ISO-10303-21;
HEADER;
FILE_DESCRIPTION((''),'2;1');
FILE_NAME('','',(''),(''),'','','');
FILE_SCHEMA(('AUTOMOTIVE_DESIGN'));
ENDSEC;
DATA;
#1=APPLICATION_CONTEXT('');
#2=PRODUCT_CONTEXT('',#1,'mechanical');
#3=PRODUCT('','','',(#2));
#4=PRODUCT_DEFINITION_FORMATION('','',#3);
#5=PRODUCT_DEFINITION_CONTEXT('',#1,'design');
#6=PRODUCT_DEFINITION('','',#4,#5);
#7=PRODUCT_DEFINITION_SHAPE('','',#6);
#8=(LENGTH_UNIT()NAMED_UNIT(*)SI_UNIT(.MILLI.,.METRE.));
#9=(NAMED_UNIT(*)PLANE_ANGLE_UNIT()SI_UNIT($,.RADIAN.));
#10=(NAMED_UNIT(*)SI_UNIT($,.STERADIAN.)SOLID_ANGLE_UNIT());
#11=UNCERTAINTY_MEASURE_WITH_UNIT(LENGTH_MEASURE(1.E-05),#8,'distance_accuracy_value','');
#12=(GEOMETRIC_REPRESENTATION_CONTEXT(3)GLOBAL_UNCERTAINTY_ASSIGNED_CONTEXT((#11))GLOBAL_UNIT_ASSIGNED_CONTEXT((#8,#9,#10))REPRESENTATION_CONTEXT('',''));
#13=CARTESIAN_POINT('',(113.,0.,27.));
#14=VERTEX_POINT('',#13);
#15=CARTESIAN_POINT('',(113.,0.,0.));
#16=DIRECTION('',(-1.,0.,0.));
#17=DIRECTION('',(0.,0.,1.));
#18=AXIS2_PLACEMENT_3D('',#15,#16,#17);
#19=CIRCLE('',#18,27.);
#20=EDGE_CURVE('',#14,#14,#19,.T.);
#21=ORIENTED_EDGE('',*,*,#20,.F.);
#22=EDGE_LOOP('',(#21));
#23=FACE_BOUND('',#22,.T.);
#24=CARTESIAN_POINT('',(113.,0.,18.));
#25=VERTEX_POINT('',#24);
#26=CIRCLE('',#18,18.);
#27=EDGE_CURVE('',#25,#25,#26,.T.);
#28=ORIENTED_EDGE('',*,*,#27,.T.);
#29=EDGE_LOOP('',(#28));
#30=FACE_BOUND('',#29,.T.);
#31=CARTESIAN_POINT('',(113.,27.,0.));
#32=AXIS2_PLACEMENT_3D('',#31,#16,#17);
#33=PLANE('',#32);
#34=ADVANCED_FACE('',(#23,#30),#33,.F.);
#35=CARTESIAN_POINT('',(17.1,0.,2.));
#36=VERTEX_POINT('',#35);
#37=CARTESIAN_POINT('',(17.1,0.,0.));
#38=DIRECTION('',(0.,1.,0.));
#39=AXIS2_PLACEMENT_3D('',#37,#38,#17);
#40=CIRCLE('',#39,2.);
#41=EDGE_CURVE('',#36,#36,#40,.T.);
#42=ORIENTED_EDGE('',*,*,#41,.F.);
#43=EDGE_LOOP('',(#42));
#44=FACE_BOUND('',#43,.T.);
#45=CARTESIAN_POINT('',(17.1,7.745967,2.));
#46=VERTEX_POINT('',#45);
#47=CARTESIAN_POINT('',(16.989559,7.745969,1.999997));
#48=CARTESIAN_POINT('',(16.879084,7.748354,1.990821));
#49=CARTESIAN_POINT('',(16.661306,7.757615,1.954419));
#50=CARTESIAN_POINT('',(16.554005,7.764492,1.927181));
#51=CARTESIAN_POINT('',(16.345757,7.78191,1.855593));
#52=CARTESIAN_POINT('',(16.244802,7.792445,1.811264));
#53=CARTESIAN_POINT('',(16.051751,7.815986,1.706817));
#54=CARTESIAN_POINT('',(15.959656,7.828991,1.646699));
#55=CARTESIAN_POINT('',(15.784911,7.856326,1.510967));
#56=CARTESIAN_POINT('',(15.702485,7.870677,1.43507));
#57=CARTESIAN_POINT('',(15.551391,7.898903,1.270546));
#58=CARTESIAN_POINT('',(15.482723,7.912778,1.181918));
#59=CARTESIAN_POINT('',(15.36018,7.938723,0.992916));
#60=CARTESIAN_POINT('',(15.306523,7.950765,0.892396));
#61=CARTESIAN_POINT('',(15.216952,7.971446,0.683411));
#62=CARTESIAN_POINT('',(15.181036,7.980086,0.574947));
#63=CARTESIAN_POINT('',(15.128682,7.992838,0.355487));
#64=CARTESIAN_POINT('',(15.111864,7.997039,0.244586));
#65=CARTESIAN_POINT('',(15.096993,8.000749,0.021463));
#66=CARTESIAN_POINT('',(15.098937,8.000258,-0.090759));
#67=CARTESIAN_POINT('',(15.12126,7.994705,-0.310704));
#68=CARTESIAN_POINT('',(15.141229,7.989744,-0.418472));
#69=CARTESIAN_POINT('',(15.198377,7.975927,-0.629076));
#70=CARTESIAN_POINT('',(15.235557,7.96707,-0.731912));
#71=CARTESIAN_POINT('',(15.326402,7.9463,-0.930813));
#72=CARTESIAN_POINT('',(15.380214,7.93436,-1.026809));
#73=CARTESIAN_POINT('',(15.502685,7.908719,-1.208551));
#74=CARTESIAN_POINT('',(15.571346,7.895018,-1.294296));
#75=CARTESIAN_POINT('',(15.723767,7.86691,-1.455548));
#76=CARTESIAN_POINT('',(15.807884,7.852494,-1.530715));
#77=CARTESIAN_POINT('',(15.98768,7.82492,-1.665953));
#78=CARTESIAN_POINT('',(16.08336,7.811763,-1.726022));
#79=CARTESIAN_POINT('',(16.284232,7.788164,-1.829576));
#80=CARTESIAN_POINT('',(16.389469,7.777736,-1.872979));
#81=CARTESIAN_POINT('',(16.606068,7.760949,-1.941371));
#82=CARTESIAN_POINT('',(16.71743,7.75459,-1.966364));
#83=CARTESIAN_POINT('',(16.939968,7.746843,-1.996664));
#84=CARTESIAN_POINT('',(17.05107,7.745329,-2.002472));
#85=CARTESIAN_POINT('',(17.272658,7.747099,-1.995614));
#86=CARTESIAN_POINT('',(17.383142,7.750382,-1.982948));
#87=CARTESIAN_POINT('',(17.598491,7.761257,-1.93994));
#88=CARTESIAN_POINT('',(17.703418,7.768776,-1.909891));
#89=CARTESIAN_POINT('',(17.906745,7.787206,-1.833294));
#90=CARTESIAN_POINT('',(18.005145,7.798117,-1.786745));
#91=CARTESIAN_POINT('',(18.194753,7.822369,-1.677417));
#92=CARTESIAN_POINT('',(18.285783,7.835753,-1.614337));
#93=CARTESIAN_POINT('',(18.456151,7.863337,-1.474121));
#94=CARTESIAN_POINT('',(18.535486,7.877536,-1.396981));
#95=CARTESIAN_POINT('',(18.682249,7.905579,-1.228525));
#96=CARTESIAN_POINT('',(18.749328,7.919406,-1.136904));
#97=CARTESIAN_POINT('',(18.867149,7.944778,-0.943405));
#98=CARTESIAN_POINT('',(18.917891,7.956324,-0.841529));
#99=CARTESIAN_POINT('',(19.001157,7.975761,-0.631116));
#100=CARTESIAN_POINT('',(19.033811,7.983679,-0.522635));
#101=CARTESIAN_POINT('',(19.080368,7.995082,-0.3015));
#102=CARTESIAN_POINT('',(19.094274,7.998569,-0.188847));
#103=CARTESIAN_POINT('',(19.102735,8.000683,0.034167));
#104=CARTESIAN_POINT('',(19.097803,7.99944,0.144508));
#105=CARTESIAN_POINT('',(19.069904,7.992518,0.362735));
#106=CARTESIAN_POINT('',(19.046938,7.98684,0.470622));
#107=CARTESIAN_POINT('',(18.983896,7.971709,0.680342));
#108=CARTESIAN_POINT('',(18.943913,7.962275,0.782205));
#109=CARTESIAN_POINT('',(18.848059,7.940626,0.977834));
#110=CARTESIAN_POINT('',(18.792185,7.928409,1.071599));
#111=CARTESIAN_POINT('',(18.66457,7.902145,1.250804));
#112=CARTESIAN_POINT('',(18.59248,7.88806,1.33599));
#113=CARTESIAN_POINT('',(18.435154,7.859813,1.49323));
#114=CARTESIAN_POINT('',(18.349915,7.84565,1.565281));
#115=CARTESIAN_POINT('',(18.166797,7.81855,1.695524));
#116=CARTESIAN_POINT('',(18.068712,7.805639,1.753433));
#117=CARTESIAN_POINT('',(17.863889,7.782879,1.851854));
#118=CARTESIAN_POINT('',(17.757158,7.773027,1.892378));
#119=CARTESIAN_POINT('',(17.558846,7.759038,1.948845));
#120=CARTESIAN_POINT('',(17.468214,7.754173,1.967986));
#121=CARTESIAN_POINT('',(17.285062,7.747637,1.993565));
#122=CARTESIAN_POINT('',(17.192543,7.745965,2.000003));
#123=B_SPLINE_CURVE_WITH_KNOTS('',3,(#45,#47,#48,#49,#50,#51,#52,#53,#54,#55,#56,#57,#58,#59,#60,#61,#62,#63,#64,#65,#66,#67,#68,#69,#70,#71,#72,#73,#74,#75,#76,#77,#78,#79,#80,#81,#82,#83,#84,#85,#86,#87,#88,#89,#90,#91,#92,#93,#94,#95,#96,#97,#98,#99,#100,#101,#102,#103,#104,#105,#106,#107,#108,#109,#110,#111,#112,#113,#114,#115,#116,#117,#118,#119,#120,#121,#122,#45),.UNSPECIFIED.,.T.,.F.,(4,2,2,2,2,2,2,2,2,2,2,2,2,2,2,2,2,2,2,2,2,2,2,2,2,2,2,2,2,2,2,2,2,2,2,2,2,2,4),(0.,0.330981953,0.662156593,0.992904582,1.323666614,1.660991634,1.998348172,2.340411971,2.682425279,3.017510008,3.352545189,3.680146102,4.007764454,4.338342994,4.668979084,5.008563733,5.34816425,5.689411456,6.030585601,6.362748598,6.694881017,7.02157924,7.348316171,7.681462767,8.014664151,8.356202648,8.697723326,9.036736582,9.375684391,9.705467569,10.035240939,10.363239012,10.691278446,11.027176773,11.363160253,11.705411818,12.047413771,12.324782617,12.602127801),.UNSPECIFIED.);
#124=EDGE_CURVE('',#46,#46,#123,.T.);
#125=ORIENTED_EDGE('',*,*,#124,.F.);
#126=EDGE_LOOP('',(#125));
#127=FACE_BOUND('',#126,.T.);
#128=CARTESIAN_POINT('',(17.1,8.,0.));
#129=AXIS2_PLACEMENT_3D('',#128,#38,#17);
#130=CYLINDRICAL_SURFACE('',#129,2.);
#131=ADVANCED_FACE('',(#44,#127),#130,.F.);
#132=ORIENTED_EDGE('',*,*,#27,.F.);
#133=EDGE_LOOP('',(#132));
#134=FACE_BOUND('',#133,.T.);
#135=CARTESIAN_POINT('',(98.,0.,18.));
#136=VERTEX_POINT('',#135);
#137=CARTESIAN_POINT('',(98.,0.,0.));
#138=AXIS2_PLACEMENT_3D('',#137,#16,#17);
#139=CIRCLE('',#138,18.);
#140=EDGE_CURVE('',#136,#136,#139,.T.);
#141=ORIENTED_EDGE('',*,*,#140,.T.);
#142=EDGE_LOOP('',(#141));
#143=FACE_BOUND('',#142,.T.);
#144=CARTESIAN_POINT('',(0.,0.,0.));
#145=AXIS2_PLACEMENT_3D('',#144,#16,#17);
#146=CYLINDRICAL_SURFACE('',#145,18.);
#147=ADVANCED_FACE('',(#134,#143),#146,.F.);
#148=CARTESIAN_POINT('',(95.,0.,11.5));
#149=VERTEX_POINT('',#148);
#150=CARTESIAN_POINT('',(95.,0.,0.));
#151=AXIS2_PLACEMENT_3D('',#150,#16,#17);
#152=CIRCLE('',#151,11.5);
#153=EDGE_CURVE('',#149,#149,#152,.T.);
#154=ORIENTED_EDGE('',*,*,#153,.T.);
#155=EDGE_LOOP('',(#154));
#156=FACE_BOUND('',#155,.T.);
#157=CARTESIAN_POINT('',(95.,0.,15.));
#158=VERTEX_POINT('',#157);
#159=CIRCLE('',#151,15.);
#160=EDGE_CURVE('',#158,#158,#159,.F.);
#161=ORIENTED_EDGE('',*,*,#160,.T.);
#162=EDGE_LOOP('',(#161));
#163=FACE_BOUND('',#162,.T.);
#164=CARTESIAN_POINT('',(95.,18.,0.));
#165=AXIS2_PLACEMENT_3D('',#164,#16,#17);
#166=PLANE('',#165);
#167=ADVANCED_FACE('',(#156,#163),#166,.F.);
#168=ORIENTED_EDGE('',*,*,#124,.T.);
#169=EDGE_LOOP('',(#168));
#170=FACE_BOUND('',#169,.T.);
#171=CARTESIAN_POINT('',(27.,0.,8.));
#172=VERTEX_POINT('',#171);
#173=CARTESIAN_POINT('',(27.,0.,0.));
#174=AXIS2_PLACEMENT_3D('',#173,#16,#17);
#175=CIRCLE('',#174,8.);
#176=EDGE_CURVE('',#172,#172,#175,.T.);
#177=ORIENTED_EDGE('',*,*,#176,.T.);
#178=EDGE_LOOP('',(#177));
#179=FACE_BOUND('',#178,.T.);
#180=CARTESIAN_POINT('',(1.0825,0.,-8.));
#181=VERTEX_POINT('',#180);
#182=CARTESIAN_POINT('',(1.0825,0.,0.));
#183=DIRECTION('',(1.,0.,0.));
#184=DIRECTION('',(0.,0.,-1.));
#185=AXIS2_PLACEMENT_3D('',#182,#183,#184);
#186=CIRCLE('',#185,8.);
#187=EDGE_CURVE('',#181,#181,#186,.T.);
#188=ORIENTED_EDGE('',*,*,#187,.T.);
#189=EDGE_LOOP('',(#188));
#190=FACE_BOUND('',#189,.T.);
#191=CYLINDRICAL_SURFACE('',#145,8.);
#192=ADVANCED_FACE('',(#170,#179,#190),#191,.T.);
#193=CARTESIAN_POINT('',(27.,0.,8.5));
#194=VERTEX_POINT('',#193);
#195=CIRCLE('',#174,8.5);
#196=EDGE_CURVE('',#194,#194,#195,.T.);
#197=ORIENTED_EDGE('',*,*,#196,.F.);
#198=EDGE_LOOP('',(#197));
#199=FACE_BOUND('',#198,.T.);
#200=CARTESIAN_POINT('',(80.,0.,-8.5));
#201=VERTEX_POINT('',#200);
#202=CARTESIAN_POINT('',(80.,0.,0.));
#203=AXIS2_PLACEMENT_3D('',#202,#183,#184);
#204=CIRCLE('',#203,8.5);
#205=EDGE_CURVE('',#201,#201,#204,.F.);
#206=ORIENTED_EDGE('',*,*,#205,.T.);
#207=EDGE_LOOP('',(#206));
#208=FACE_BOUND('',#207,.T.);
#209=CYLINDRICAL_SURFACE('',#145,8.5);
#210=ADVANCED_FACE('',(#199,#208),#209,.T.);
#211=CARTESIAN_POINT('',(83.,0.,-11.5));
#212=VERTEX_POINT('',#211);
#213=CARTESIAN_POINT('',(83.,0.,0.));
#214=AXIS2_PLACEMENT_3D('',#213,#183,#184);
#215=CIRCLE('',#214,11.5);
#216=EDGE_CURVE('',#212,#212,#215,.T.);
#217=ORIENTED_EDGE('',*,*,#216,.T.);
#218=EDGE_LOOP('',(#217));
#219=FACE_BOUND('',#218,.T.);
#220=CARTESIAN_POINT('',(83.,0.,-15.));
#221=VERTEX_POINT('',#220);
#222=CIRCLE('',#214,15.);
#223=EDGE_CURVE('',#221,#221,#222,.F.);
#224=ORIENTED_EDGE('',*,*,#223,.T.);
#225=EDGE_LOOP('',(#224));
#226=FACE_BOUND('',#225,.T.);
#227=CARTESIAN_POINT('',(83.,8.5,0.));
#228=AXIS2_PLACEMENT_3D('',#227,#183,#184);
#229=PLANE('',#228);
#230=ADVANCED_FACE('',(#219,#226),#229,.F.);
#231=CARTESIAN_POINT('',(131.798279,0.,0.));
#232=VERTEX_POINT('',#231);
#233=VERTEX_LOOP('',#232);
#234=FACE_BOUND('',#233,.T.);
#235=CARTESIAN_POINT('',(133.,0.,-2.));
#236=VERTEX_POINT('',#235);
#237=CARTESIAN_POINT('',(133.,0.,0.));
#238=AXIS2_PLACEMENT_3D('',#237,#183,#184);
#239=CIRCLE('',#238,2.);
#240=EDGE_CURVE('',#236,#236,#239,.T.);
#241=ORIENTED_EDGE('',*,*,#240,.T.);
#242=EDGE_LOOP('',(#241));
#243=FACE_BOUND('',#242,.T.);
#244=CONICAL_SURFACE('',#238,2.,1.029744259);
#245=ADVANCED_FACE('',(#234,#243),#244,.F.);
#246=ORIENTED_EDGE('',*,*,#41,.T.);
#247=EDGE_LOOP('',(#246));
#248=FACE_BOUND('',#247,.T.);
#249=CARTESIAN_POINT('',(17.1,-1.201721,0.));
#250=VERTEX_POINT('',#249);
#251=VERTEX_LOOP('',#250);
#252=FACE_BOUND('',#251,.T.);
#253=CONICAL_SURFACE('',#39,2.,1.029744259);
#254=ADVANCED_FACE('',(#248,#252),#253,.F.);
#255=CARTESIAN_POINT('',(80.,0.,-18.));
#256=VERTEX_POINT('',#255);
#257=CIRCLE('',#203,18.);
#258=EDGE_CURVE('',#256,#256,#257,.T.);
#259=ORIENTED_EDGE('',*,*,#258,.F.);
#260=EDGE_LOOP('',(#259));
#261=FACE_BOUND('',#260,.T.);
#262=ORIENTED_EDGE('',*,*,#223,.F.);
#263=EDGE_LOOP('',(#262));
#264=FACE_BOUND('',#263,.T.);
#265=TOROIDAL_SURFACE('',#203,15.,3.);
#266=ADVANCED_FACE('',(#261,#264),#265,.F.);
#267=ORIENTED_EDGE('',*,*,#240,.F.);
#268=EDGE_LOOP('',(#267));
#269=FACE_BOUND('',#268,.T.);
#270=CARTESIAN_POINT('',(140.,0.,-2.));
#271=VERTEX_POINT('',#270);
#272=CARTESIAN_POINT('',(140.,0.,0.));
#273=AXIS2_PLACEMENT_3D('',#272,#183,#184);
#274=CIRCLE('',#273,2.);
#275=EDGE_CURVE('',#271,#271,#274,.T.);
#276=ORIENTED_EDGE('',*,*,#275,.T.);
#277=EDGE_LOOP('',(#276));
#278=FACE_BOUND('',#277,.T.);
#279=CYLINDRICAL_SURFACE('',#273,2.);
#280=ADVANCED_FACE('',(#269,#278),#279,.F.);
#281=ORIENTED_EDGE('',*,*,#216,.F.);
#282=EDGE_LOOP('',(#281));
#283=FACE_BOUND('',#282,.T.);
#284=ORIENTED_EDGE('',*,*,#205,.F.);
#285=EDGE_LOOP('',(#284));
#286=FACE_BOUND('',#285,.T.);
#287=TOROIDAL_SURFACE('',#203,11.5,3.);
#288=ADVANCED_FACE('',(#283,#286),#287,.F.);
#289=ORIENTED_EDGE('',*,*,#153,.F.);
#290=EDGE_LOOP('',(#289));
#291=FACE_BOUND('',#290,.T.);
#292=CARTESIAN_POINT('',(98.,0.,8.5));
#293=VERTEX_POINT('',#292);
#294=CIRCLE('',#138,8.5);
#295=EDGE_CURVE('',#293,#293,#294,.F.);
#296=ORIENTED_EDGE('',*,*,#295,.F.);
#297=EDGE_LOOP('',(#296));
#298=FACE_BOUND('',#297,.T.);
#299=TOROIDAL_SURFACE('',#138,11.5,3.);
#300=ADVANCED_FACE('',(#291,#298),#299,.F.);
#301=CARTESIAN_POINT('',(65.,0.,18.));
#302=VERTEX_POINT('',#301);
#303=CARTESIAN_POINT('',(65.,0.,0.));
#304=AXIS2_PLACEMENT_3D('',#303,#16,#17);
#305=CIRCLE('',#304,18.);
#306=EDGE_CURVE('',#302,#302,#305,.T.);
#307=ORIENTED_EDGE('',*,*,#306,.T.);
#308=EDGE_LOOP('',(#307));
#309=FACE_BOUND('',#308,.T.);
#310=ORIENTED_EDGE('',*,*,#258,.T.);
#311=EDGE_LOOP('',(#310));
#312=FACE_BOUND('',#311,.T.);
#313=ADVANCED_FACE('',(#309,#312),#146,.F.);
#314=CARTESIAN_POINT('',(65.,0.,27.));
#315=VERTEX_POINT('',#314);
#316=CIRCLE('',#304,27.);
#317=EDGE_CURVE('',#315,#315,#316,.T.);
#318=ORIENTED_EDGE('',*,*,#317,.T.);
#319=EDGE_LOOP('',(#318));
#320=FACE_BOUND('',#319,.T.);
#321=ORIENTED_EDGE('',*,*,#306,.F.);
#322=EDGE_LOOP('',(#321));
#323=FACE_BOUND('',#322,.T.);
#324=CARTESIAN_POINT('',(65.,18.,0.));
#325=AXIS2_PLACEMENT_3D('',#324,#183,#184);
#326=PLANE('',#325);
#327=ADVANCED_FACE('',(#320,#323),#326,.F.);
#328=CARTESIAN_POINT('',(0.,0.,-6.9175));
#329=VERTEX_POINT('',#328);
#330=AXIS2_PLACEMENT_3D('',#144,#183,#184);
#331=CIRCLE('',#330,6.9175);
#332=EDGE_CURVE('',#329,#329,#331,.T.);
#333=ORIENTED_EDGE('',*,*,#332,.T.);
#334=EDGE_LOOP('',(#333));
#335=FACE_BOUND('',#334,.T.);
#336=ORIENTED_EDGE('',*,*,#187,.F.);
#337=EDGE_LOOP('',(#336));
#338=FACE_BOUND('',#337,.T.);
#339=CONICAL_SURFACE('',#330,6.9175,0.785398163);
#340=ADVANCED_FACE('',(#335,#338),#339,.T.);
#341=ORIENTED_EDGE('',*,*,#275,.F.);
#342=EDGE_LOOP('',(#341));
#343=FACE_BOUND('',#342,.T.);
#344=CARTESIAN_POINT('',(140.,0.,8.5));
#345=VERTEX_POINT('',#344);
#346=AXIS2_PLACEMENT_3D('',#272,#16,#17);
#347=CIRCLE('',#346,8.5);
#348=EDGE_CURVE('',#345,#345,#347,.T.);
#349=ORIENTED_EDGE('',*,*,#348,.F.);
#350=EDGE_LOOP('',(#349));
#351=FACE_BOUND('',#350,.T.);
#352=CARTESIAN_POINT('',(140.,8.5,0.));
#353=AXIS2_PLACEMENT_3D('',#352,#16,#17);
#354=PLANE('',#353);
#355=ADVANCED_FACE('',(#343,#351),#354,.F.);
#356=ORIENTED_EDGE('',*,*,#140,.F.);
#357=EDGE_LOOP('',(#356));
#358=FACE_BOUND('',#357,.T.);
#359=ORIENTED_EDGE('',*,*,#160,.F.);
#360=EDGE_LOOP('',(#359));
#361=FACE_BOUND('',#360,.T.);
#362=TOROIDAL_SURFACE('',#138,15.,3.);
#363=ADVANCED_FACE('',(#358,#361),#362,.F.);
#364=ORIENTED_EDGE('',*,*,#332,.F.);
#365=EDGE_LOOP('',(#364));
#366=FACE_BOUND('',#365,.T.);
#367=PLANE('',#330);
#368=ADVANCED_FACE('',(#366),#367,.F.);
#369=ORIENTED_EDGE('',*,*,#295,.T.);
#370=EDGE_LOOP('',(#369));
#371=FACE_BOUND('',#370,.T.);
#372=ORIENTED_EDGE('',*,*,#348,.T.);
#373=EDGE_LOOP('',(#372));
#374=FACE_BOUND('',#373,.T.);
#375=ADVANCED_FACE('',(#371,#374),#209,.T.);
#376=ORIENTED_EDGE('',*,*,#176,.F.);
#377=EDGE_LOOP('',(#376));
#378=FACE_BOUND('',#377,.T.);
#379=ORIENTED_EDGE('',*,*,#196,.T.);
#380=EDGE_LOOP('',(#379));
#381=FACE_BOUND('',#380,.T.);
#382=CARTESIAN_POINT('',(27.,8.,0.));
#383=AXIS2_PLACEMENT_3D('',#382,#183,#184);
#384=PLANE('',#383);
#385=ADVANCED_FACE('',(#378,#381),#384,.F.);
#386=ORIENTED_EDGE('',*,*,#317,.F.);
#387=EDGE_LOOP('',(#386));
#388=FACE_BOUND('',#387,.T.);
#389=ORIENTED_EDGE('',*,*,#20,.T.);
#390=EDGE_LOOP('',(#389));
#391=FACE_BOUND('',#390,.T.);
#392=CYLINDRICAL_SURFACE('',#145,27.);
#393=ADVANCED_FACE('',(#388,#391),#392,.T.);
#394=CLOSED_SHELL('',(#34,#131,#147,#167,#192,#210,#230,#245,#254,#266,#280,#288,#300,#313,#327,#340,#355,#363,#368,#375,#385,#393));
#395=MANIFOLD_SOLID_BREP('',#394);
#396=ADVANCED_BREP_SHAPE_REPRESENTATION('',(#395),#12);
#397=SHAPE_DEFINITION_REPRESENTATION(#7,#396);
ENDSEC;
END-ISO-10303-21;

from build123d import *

# Parameters (mm, degrees)
FILLET_4_R      = 3
F_4_0MM_4_D     = 4
F_4_0MM_4_DEPTH = 8
F_4_0MM_4_TIP   = 1.201721238
F_4_0MM_5_D     = 4
F_4_0MM_5_DEPTH = 7
F_4_0MM_5_TIP   = 1.201721238


# Read off the part's stored shape, not the designer's step: M16 机械螺纹 螺柱1
with BuildPart() as part:
    # 草图1 → 旋转1 (revolve)
    with BuildSketch(Plane.XY, mode=Mode.PRIVATE) as revolve_1_sk:
        Polygon((0, 0), (0, 8), (27, 8), (27, 8.5), (83, 8.5), (83, 18), (65, 18), (65, 27), (113, 27), (113, 18), (95, 18), (95, 8.5), (140, 8.5), (140, 0), align=None)
    revolve(revolve_1_sk.sketch.rotate(Axis((0, 0, 0), (1, 0, 0)), 90), axis=Axis((0, 0, 0), (1, 0, 0)))

    # 圆角4
    fillet_4_edges = [part.edges().sort_by_distance(p)[0] for p in [
        (95, 0, -8.5),
        (95, 0, -18),
        (83, 0, -18),
        (83, 0, -8.5),
    ]]
    fillet(fillet_4_edges, radius=FILLET_4_R)

    # M16 机械螺纹 螺柱1 outline → M16 机械螺纹 螺柱1 (revolve, cut)
    with BuildSketch(Plane.YX):
        Polygon((8, 1.0825), (6.9175, 0), (8, 0), align=None)
    revolve(axis=Axis((0, 0, 0), (1, 0, 0)), mode=Mode.SUBTRACT)

    # Ø4.0mm 暗销孔4
    with Locations(Plane(origin=(17.1, 8, 0), x_dir=(0, 0, 1), z_dir=(0, 1, 0))):
        with Locations((0, 0)):
            Hole(F_4_0MM_4_D / 2, depth=F_4_0MM_4_DEPTH)
            with Locations((0, 0, -(F_4_0MM_4_DEPTH + F_4_0MM_4_TIP / 2))):  # 118° drill point
                Cone(0, F_4_0MM_4_D / 2, F_4_0MM_4_TIP, mode=Mode.SUBTRACT)

    # Ø4.0mm 暗销孔5
    with Locations(Plane(origin=(140, 0, 0), x_dir=(0, 0, -1), z_dir=(1, 0, 0))):
        with Locations((0, 0)):
            Hole(F_4_0MM_5_D / 2, depth=F_4_0MM_5_DEPTH)
            with Locations((0, 0, -(F_4_0MM_5_DEPTH + F_4_0MM_5_TIP / 2))):  # 118° drill point
                Cone(0, F_4_0MM_5_D / 2, F_4_0MM_5_TIP, mode=Mode.SUBTRACT)


solid = part.part
